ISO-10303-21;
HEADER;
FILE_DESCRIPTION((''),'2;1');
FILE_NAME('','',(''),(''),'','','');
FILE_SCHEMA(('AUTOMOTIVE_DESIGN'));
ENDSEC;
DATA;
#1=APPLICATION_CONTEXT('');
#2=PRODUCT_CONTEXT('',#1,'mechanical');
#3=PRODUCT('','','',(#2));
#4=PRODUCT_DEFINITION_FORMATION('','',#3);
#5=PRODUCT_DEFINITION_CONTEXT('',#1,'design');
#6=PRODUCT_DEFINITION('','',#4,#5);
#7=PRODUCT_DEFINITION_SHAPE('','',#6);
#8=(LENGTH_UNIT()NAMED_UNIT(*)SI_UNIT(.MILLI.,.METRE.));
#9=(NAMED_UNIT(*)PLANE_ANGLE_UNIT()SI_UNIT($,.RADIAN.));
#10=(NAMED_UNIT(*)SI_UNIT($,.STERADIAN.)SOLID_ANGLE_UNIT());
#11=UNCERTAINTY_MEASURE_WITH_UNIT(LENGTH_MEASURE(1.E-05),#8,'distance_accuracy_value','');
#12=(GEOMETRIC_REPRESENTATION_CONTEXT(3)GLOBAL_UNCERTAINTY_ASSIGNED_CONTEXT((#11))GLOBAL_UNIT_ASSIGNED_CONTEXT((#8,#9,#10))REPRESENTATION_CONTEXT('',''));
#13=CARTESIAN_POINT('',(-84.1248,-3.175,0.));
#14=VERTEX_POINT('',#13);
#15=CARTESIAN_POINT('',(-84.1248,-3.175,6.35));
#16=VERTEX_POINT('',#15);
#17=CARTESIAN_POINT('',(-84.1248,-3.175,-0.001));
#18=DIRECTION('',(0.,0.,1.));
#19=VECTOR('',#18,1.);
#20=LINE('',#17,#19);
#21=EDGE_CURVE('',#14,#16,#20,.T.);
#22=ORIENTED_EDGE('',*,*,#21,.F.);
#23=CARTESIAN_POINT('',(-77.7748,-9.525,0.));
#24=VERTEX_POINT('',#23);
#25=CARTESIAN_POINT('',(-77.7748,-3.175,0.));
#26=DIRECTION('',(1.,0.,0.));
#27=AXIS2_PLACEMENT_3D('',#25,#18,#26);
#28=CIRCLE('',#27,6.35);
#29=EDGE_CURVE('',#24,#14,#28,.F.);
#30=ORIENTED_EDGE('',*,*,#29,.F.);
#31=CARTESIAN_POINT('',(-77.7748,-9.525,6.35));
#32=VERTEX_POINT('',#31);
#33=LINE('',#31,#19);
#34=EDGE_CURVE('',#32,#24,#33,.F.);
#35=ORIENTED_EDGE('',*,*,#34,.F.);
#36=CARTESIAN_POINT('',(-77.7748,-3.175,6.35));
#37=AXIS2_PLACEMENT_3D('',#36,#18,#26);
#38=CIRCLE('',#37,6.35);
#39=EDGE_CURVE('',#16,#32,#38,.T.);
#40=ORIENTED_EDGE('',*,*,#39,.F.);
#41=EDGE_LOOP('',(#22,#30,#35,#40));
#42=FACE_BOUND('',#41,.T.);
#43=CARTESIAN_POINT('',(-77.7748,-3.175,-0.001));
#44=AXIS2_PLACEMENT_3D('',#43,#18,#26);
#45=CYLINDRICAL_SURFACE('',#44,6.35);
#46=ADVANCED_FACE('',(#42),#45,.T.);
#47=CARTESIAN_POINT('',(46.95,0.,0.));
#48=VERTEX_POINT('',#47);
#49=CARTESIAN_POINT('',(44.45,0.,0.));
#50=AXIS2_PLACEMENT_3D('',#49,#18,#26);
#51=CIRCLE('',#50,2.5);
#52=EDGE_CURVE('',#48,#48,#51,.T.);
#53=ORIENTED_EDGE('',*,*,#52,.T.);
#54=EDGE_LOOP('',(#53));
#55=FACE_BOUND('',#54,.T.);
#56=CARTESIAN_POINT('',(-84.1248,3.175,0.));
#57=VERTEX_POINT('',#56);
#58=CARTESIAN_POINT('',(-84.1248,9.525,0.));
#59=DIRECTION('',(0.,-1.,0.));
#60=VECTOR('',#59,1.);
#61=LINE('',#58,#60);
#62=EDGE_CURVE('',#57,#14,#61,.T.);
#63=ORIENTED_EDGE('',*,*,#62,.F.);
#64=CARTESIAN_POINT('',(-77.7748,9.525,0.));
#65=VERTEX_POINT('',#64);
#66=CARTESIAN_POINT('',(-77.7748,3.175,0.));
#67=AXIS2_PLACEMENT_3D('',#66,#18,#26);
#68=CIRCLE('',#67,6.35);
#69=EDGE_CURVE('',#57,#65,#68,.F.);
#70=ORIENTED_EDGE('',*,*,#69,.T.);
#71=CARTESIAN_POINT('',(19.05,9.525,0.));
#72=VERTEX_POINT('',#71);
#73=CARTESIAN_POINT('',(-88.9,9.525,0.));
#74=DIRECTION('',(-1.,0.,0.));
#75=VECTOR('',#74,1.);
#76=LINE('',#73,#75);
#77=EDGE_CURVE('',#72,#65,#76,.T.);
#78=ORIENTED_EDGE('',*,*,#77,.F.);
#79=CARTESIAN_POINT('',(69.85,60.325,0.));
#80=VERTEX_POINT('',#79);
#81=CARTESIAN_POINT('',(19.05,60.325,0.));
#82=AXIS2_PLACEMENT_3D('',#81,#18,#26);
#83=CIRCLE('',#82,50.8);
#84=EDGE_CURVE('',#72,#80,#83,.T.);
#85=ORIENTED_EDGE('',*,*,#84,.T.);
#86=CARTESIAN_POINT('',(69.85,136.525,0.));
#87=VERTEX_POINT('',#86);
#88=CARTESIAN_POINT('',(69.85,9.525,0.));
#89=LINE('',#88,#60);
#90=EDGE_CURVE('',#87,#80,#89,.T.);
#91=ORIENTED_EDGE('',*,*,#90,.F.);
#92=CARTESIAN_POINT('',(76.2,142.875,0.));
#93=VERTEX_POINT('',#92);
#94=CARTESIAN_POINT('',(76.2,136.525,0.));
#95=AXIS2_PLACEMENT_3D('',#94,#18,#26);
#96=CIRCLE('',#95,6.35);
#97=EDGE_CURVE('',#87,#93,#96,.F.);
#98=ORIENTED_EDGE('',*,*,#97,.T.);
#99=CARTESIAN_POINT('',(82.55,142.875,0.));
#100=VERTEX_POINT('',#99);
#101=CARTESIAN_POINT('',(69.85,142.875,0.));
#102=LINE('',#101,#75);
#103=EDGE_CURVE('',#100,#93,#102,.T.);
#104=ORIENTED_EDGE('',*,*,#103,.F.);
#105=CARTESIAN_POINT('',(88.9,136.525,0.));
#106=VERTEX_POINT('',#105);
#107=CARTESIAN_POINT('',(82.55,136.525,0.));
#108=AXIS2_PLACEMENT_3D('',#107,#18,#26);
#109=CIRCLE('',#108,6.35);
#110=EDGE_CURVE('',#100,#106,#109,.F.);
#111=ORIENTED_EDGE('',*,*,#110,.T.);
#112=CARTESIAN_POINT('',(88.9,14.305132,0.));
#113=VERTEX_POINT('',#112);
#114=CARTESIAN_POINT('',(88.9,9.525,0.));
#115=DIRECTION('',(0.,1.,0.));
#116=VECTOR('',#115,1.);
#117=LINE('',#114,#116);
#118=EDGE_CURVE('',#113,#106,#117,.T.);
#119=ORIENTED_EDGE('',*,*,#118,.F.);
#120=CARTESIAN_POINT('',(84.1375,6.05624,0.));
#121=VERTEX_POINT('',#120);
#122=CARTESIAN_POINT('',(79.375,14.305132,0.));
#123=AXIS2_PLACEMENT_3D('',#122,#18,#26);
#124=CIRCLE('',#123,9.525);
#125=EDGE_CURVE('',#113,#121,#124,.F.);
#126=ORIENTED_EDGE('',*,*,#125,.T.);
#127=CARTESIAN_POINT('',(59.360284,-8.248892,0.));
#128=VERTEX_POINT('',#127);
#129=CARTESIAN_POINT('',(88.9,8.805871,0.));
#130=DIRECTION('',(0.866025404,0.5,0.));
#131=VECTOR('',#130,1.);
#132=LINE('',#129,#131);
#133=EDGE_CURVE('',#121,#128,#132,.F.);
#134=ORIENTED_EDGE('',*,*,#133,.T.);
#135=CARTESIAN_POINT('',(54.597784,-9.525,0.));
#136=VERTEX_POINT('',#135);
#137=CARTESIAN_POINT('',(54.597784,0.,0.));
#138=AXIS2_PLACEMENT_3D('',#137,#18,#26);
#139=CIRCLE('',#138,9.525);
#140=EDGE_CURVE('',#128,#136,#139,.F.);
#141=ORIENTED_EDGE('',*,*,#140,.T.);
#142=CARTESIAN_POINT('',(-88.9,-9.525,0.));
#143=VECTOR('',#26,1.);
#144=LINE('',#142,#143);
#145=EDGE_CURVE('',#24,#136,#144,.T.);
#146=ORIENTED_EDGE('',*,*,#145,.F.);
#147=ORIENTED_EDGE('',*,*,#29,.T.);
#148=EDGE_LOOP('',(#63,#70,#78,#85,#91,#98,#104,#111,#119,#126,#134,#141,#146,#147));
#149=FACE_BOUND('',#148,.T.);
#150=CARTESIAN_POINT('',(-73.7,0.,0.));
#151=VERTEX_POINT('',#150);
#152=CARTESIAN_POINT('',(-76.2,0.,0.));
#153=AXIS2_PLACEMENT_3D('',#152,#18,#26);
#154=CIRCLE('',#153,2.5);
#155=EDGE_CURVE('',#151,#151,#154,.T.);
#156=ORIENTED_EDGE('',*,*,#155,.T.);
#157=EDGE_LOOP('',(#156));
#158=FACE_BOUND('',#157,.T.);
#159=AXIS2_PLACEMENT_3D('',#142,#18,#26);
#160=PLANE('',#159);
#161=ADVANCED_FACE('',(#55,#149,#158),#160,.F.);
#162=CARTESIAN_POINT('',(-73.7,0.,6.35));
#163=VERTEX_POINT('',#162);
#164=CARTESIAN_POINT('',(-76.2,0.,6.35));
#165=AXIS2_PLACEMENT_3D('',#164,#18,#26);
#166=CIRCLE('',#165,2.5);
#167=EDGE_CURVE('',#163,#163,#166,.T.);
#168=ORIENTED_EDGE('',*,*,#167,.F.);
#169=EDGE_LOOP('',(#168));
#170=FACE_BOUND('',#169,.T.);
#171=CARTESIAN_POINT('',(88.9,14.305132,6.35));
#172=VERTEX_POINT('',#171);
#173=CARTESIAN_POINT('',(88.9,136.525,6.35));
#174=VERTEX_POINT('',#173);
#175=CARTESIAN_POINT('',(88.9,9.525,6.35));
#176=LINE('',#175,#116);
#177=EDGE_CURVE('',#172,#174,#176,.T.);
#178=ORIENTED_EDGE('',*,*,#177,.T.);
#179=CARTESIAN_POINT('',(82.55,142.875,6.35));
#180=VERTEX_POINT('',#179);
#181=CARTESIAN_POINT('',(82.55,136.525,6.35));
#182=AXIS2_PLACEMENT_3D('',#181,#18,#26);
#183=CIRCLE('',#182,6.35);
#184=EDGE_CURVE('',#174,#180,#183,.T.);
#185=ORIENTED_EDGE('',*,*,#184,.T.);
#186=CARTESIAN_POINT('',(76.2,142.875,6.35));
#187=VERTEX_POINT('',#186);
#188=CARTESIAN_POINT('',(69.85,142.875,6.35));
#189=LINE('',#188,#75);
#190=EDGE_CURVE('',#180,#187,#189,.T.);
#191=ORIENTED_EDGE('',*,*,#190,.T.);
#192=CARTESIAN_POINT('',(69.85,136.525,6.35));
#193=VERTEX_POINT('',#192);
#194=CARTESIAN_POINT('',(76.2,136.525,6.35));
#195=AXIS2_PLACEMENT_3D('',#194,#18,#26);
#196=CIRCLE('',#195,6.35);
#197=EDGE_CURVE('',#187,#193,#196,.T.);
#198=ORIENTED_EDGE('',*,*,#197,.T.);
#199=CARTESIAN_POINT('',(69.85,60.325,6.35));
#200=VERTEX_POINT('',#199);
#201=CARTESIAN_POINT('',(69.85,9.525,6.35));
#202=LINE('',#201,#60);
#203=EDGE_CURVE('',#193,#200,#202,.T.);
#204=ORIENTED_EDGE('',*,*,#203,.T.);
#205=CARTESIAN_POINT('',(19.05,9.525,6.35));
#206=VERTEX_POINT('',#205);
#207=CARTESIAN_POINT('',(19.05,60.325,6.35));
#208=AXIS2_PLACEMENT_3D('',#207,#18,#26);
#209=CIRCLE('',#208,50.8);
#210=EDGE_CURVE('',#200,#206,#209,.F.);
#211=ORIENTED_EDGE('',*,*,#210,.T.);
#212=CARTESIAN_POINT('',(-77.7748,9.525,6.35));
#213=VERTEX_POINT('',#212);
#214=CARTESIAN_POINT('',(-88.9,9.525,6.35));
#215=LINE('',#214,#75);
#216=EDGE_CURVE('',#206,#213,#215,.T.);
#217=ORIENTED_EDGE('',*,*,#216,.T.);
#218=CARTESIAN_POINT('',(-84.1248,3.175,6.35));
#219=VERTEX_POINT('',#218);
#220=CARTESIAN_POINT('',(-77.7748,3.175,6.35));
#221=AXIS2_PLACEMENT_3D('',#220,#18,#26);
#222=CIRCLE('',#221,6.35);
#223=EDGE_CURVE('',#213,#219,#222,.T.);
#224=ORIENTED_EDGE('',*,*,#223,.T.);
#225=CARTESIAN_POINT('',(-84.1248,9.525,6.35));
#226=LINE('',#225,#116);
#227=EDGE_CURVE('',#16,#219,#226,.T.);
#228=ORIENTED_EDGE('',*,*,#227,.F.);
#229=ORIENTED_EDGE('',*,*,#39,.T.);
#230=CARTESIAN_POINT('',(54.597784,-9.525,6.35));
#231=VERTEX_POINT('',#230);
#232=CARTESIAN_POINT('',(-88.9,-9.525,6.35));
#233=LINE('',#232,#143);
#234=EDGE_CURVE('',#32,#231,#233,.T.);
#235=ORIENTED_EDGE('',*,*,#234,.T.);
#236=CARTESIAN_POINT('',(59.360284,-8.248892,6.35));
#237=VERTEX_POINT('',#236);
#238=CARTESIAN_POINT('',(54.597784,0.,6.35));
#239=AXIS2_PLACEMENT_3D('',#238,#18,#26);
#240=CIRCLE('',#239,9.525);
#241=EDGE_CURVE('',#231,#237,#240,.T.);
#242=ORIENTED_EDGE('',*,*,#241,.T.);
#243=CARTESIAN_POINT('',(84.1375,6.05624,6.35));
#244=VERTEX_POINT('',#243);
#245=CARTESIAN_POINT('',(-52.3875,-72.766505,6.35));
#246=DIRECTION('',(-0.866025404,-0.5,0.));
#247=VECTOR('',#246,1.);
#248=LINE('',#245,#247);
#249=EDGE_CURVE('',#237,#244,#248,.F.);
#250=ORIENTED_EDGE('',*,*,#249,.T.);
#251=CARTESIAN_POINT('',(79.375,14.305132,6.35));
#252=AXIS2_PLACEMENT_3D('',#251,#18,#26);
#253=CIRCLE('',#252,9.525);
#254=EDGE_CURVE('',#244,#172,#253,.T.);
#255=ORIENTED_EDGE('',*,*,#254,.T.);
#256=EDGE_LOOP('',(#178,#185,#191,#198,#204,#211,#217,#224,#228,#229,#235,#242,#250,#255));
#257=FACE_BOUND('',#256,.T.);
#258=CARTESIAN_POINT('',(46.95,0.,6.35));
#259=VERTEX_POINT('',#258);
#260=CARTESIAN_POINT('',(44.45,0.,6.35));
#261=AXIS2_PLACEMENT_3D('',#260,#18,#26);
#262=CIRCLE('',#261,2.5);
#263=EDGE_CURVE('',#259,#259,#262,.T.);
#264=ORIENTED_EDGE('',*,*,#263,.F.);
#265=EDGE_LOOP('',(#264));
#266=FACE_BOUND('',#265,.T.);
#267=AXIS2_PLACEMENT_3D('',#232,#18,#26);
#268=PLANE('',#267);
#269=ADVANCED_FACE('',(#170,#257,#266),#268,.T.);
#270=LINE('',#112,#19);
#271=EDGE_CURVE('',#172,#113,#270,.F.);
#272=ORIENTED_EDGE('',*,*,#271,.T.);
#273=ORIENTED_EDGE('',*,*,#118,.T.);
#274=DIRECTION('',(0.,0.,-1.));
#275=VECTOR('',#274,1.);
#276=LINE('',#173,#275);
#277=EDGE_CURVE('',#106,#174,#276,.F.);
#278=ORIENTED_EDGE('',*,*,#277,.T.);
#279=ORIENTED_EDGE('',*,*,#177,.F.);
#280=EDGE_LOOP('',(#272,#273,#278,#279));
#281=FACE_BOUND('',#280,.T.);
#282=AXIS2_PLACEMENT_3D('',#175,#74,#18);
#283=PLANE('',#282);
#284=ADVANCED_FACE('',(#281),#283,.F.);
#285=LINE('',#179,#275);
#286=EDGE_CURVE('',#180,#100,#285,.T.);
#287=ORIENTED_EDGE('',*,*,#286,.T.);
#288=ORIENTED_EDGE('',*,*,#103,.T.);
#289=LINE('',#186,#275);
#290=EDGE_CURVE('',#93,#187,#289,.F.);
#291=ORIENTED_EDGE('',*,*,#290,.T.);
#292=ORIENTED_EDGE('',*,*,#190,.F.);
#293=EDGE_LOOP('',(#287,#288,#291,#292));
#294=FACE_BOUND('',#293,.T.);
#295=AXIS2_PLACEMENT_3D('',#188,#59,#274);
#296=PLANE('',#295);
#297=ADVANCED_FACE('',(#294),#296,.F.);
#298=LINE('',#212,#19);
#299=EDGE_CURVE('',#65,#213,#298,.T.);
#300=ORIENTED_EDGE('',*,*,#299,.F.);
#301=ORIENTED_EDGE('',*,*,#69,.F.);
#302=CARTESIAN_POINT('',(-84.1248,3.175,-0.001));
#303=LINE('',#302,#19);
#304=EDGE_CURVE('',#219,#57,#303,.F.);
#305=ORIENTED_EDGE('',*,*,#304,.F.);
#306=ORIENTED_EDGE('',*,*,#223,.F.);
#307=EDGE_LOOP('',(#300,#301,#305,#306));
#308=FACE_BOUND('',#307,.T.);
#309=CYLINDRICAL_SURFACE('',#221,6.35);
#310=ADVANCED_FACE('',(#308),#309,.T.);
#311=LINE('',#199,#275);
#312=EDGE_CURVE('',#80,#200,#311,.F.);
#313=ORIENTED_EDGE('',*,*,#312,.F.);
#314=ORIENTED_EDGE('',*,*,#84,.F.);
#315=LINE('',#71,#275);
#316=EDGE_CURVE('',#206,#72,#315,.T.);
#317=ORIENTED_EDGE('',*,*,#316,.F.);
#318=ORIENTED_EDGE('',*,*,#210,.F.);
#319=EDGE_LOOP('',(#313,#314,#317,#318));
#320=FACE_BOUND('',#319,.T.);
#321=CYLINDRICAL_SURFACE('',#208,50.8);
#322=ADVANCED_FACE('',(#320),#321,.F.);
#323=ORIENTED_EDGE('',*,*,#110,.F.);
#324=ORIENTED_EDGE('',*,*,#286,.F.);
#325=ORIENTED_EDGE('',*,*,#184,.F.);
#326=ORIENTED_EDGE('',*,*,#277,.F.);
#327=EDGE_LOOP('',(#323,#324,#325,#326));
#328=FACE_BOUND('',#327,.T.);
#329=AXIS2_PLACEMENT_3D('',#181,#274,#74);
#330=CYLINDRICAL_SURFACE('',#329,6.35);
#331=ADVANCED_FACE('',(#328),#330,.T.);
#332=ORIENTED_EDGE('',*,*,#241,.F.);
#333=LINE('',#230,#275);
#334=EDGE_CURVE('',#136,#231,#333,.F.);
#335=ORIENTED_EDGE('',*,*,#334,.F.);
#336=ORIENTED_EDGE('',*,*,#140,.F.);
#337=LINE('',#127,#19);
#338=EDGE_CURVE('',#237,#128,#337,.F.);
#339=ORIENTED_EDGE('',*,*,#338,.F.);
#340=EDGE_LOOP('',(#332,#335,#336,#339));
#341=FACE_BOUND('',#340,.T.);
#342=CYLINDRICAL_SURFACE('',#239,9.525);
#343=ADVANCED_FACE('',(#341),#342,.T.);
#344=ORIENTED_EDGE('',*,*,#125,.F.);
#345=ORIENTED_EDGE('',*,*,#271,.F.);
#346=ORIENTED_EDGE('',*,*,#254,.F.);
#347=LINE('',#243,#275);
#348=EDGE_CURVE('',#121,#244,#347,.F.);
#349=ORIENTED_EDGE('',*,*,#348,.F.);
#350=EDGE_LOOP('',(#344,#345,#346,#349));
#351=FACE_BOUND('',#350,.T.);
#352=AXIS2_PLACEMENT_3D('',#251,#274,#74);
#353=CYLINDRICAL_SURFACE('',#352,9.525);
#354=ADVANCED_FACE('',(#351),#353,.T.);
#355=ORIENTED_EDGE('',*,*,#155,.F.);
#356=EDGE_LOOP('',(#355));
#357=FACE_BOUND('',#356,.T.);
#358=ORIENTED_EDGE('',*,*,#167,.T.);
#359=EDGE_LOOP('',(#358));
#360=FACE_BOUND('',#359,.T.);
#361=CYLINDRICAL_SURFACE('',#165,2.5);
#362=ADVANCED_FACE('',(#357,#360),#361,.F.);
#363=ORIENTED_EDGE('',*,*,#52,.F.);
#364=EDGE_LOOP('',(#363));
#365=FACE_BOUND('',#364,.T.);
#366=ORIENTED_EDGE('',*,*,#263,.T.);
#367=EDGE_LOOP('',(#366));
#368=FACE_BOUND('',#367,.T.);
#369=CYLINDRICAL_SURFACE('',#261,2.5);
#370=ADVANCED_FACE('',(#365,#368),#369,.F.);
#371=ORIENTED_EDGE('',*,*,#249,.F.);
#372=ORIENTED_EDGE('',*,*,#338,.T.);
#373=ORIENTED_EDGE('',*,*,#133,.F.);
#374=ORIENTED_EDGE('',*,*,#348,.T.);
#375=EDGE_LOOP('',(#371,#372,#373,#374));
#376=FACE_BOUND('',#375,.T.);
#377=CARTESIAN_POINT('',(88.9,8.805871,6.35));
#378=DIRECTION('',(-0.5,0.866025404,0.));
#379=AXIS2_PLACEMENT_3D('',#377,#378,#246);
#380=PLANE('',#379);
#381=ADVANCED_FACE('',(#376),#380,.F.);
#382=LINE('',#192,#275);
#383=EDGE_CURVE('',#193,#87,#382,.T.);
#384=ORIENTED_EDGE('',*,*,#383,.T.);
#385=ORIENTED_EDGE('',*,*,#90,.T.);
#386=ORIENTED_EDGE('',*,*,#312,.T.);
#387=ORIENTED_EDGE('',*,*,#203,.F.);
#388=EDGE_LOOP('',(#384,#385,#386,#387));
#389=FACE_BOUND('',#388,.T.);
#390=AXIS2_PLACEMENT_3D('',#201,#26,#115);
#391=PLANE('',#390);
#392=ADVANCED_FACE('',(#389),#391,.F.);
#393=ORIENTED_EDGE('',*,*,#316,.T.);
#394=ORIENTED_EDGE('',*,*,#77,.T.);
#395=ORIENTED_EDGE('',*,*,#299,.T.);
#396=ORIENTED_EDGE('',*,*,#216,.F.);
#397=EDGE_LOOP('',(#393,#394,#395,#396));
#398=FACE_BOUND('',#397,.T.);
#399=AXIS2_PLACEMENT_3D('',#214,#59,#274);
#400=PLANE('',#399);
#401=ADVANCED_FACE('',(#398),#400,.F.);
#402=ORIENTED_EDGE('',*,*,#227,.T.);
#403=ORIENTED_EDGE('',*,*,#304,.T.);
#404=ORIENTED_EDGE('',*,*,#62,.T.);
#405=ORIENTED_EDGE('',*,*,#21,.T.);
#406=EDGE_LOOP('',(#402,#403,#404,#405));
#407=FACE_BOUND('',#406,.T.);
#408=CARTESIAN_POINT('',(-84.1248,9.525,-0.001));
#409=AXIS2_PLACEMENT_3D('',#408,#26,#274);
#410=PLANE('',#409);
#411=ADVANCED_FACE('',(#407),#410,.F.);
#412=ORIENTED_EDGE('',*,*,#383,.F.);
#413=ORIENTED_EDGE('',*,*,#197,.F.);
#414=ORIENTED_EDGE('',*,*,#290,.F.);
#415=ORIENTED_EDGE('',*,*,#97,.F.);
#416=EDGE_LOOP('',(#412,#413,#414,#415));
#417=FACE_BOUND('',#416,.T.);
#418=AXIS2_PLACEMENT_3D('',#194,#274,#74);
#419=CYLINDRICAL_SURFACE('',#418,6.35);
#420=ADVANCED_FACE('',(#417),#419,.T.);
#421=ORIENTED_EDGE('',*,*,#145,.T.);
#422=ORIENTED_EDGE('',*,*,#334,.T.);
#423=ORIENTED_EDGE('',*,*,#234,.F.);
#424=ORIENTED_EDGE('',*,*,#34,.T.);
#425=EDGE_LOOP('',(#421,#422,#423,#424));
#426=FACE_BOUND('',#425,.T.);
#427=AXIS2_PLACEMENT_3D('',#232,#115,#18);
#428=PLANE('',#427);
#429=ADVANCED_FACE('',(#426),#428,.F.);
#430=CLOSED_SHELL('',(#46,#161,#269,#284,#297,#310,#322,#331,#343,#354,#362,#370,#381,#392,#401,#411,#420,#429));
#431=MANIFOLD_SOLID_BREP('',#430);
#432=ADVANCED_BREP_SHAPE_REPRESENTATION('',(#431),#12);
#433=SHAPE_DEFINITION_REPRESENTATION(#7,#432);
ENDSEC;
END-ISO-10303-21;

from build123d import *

# Parameters (mm, degrees)
BASE_FLANGE1_DEPTH    = 6.35
M6X1_0_TAPPED_HOLE1_D = 5
CHAMFER1_SIZE         = 31.75
CHAMFER1_SIZE2        = 18.330871047
EXTRUDE1_REACH        = 170.395
SKETCH5_W             = 4.7752
SKETCH5_H             = 19.05
FILLET1_R             = 6.35
FILLET2_R             = 50.8
FILLET3_R             = 9.525


# Sheet-metal steps are written as plain solids
with BuildPart() as part:
    # Sketch1 → Base-Flange1 (new body)
    with BuildSketch(Plane.XY):
        Polygon((-88.9, 9.525), (69.85, 9.525), (69.85, 142.875), (88.9, 142.875), (88.9, 9.525), (88.9, -9.525), (-88.9, -9.525), align=None)
    extrude(amount=BASE_FLANGE1_DEPTH)

    # M6x1.0 Tapped Hole1 (through all)
    with Locations(Plane.XY.offset(6.35)):
        with Locations((-76.2, 0), (44.45, 0)):
            Hole(M6X1_0_TAPPED_HOLE1_D / 2)

    # Chamfer1
    chamfer1_edges = [part.edges().sort_by_distance(p)[0] for p in [
        (88.9, -9.525, 3.175),
    ]]
    chamfer1_side = [part.faces().sort_by_distance(p)[0] for p in [
        (0, -9.525, 3.175),
    ]]
    chamfer(chamfer1_edges, length=CHAMFER1_SIZE, length2=CHAMFER1_SIZE2, reference=chamfer1_side[0])

    # Sketch5 → Extrude1 (cut, up to next)
    with BuildSketch(Plane.XY.offset(6.35), mode=Mode.PRIVATE) as extrude1_sk1:
        with Locations((-86.5124, 0)):
            Rectangle(SKETCH5_W, SKETCH5_H)
    extrude1_tool1 = extrude(extrude1_sk1.sketch, amount=-EXTRUDE1_REACH, mode=Mode.PRIVATE) & part.part
    add(extrude1_tool1.solids().sort_by_distance((-86.5124, 0, 6.35))[0], mode=Mode.SUBTRACT)

    # Fillet1
    fillet1_edges = [part.edges().sort_by_distance(p)[0] for p in [
        (69.85, 142.875, 3.175),
        (88.9, 142.875, 3.175),
        (-84.1248, 9.525, 3.175),
        (-84.1248, -9.525, 3.175),
    ]]
    fillet(fillet1_edges, radius=FILLET1_R)

    # Fillet2
    fillet2_edges = [part.edges().sort_by_distance(p)[0] for p in [
        (69.85, 9.525, 3.175),
    ]]
    fillet(fillet2_edges, radius=FILLET2_R)

    # Fillet3
    fillet3_edges = [part.edges().sort_by_distance(p)[0] for p in [
        (88.9, 8.805871047, 3.175),
        (57.15, -9.525, 3.175),
    ]]
    fillet(fillet3_edges, radius=FILLET3_R)


solid = part.part
